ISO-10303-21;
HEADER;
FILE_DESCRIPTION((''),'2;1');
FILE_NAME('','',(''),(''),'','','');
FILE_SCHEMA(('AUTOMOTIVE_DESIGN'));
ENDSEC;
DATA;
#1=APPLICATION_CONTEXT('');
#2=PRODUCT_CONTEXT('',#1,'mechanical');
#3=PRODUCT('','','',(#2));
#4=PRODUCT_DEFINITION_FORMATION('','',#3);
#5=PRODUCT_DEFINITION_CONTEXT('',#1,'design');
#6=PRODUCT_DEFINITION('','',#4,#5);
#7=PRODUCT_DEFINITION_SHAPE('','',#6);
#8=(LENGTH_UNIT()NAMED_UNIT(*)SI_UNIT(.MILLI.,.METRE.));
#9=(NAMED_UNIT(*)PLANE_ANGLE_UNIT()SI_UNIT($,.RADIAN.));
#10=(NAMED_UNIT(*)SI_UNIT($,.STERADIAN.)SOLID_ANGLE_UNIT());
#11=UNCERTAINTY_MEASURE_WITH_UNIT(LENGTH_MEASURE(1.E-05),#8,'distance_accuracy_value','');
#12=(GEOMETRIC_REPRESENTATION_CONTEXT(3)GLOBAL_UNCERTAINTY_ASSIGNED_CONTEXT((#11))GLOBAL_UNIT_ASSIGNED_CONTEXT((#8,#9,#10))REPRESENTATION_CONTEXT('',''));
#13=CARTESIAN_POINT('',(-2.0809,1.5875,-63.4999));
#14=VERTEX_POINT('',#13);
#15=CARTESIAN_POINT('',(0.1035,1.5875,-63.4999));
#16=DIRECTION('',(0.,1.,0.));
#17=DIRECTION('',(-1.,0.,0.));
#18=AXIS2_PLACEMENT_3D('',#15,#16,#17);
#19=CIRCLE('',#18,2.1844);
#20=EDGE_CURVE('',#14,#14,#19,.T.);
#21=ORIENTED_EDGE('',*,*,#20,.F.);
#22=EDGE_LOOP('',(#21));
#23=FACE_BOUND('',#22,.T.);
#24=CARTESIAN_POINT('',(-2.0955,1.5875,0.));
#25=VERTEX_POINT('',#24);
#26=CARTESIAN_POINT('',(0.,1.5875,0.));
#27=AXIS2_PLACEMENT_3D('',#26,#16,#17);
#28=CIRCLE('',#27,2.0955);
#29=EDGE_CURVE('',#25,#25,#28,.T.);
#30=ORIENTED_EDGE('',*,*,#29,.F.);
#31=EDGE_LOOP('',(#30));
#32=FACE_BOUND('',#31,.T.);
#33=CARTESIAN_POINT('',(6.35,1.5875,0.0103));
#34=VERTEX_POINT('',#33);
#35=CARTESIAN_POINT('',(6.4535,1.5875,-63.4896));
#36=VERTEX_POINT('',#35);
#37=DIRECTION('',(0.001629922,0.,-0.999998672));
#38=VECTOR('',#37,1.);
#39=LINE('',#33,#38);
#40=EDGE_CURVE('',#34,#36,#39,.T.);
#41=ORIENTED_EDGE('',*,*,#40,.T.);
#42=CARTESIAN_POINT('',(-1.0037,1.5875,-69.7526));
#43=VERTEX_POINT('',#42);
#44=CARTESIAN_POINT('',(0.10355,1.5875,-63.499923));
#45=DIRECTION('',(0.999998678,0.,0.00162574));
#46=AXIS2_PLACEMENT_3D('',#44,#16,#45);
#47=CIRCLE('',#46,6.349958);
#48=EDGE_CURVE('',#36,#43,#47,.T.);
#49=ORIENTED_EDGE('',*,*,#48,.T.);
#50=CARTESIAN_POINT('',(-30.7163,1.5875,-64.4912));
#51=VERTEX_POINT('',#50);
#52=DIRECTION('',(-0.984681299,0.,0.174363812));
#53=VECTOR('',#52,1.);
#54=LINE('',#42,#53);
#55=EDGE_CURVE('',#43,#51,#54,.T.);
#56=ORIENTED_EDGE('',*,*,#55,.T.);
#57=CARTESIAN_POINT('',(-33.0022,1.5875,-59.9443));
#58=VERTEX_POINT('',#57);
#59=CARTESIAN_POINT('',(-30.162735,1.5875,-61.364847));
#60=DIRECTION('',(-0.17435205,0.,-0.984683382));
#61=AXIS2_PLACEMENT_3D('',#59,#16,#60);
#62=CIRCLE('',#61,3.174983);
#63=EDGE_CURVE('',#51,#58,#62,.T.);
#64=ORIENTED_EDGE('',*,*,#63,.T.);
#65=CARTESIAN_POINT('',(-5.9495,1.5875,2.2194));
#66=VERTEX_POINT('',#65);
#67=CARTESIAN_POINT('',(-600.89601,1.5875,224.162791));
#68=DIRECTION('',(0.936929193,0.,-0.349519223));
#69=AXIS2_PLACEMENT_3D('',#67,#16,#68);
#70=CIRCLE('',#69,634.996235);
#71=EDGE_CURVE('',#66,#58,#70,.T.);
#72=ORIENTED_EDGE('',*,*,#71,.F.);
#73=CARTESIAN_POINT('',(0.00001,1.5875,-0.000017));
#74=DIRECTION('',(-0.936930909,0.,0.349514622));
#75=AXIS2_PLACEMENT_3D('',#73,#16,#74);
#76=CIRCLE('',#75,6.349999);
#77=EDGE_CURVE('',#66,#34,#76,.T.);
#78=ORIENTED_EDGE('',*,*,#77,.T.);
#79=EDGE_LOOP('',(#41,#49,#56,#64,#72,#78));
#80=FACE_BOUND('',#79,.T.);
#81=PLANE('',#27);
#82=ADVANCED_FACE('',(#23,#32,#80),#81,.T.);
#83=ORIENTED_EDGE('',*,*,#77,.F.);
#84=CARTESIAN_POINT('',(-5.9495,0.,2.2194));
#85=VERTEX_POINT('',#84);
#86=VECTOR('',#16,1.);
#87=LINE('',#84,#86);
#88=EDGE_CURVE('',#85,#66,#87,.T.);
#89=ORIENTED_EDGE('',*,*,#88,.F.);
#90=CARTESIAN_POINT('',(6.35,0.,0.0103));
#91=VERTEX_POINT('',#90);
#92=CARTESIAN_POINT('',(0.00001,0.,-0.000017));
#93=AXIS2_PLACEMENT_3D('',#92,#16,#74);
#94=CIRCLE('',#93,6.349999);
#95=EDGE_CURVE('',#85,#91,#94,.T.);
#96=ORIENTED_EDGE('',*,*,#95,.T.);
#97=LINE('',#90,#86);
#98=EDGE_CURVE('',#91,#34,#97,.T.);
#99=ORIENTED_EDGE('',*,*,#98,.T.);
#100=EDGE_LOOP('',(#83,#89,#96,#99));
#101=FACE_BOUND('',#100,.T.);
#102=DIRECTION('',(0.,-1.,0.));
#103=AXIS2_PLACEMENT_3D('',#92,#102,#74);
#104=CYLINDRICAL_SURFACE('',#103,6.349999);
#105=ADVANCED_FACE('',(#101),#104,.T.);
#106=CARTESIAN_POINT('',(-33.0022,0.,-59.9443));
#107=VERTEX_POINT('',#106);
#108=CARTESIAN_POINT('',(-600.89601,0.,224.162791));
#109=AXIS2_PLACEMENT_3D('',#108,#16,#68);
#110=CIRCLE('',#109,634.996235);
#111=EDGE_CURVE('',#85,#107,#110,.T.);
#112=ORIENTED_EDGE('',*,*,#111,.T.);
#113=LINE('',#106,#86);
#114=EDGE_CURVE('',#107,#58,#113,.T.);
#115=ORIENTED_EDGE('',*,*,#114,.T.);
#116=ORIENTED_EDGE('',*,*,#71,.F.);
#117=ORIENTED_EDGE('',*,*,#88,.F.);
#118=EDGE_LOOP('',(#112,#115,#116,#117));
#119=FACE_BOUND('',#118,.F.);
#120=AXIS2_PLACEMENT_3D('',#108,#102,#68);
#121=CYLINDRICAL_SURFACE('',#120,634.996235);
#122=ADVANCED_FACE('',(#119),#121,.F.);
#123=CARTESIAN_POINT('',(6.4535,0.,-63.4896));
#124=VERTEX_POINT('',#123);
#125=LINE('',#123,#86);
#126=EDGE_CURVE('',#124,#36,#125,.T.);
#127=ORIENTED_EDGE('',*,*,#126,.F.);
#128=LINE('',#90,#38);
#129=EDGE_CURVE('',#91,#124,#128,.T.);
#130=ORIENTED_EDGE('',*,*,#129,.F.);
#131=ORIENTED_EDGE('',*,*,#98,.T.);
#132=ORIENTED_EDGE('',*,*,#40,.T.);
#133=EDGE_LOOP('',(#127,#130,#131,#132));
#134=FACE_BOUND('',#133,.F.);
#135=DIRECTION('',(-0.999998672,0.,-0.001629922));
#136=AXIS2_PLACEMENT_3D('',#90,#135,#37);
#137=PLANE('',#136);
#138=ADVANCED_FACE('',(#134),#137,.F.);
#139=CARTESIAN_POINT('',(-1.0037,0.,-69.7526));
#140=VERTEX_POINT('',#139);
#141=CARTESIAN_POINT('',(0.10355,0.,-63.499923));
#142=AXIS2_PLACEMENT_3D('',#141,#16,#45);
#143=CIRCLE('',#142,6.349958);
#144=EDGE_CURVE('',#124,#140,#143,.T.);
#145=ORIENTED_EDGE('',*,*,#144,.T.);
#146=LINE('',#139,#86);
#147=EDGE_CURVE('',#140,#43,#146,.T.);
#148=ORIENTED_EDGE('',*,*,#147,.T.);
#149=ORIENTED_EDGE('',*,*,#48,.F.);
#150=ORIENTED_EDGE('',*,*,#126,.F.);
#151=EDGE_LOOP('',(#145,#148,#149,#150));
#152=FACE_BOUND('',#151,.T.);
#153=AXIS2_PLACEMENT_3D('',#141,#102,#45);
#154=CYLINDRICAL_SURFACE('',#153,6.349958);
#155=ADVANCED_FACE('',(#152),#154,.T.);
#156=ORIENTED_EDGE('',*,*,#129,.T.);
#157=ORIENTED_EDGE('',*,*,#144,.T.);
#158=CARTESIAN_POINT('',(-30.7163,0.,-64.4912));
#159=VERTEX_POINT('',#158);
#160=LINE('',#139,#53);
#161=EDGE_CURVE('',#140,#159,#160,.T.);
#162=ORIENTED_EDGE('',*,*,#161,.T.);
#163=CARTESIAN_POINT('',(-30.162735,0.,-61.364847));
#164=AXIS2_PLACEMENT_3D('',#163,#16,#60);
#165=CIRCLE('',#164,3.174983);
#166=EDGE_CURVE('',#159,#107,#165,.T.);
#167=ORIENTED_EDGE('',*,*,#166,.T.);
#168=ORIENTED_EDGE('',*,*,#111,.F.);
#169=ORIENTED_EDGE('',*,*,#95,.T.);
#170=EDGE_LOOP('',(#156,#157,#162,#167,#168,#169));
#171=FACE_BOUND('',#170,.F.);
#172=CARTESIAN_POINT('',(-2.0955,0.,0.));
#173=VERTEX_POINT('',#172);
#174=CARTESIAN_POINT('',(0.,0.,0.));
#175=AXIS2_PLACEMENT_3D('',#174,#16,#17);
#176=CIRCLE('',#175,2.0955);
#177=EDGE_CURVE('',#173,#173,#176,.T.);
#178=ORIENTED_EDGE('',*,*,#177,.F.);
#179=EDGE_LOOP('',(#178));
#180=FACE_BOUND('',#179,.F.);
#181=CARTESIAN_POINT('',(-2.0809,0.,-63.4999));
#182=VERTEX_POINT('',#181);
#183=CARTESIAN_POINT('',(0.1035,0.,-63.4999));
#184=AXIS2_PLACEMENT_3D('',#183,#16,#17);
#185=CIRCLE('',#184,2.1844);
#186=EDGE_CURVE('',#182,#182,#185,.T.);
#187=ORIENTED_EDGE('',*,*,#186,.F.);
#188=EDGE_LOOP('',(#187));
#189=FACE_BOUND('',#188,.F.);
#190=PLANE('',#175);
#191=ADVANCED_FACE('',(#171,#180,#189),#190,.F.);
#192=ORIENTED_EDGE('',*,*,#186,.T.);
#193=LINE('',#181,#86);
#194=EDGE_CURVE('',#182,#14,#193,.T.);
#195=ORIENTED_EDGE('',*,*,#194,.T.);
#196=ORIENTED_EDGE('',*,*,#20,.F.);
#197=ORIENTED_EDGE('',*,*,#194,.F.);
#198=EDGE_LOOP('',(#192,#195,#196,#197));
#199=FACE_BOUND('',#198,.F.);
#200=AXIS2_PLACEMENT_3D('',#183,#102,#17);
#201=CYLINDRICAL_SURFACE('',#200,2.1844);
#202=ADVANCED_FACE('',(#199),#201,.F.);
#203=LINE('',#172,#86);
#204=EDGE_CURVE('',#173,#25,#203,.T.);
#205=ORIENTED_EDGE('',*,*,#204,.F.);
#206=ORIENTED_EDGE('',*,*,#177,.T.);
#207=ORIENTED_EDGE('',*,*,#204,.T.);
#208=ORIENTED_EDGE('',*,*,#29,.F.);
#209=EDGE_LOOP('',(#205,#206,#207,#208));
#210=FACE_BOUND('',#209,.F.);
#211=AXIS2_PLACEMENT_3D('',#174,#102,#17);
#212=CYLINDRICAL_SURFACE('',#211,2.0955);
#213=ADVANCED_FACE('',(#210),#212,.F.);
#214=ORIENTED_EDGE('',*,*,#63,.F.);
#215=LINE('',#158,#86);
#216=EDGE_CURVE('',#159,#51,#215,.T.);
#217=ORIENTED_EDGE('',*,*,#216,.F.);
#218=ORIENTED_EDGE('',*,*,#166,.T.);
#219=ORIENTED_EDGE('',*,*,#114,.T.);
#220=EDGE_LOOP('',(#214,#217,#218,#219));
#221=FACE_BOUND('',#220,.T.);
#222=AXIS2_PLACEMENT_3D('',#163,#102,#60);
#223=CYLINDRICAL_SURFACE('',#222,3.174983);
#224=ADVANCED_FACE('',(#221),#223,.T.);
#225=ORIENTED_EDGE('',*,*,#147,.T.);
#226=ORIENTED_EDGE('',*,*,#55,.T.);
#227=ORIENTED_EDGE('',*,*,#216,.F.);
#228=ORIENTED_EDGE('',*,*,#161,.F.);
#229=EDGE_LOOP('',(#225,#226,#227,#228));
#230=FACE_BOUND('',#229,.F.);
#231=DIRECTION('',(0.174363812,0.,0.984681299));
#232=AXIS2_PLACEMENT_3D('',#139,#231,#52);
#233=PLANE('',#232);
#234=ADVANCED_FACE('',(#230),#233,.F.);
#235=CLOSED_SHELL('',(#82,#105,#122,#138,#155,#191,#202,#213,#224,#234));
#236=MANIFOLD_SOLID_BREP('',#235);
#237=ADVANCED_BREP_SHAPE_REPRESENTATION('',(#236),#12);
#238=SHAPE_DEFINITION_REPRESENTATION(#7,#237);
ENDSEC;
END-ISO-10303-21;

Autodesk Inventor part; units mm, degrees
ref_plane "YZ Plane" through (0, 0, 0) normal (1, 0, 0) x (0, 1, 0)
ref_plane "XZ Plane" through (0, 0, 0) normal (0, 1, 0) x (-1, 0, 0)
ref_plane "XY Plane" through (0, 0, 0) normal (0, 0, 1) x (1, 0, 0)
sketch "main" plane through (0, 0, 0) normal (0, 0, 1) x (1, 0, 0)
  circle A0 centre (31.4944, -42.9627) radius 2.1844
  arc A1 (31.4944, -49.3127) -> (37.7453, -41.8453) centre (31.4944, -42.9627) ccw
  arc A2 (-34.2347, -37.0168) -> (-32.0056, -49.3127) centre (-32.0056, -42.9627) ccw
  arc A3 (-34.2347, -37.0168) -> (27.8848, -9.8628) centre (-257.1487, 557.5708) ccw
  line L0 (37.7453, -41.8453) -> (32.4355, -12.1413)
  line L1 (-32.0056, -49.3127) -> (31.4944, -49.3127)
  arc A4 (32.4355, -12.1413) -> (27.8848, -9.8628) centre (29.31, -12.7) ccw
  circle A5 centre (-32.0056, -42.9627) radius 2.0955
  point P0 (5.1717, -33.3366)
  point P1 (31.6842, -7.9384)
  dimension "d0" = 1270
  dimension "d1" = 12.7
  dimension "d2" = 12.7
  dimension "d3" = 3.175
  dimension "d4" = 4.191
sketch "Sketch1" plane through (0, 0, 0) normal (0, 1, 0) x (-1, 0, 0)
  circle A0 centre (-0.1035, -63.4999) radius 2.1844
  arc A1 (-6.4535, -63.4896) -> (1.0037, -69.7526) centre (-0.1035, -63.4999) ccw
  arc A2 (5.9495, 2.2194) -> (-6.35, 0.0103) centre (0, 0) ccw
  arc A3 (5.9495, 2.2194) -> (33.0022, -59.9443) centre (600.8995, 224.1642) ccw
  line L0 (1.0037, -69.7526) -> (30.7163, -64.4912)
  line L1 (-6.35, 0.0103) -> (-6.4535, -63.4896)
  arc A4 (30.7163, -64.4912) -> (33.0022, -59.9443) centre (30.1627, -61.3648) ccw
  circle A5 centre (0, 0) radius 2.0955
  point P0 (0, 0)
extrude "Extrusion1" add sketch "Sketch1" along normal blind 1.5875
properties part number "Magazine Gusset" material "Acetal Resin, White"
